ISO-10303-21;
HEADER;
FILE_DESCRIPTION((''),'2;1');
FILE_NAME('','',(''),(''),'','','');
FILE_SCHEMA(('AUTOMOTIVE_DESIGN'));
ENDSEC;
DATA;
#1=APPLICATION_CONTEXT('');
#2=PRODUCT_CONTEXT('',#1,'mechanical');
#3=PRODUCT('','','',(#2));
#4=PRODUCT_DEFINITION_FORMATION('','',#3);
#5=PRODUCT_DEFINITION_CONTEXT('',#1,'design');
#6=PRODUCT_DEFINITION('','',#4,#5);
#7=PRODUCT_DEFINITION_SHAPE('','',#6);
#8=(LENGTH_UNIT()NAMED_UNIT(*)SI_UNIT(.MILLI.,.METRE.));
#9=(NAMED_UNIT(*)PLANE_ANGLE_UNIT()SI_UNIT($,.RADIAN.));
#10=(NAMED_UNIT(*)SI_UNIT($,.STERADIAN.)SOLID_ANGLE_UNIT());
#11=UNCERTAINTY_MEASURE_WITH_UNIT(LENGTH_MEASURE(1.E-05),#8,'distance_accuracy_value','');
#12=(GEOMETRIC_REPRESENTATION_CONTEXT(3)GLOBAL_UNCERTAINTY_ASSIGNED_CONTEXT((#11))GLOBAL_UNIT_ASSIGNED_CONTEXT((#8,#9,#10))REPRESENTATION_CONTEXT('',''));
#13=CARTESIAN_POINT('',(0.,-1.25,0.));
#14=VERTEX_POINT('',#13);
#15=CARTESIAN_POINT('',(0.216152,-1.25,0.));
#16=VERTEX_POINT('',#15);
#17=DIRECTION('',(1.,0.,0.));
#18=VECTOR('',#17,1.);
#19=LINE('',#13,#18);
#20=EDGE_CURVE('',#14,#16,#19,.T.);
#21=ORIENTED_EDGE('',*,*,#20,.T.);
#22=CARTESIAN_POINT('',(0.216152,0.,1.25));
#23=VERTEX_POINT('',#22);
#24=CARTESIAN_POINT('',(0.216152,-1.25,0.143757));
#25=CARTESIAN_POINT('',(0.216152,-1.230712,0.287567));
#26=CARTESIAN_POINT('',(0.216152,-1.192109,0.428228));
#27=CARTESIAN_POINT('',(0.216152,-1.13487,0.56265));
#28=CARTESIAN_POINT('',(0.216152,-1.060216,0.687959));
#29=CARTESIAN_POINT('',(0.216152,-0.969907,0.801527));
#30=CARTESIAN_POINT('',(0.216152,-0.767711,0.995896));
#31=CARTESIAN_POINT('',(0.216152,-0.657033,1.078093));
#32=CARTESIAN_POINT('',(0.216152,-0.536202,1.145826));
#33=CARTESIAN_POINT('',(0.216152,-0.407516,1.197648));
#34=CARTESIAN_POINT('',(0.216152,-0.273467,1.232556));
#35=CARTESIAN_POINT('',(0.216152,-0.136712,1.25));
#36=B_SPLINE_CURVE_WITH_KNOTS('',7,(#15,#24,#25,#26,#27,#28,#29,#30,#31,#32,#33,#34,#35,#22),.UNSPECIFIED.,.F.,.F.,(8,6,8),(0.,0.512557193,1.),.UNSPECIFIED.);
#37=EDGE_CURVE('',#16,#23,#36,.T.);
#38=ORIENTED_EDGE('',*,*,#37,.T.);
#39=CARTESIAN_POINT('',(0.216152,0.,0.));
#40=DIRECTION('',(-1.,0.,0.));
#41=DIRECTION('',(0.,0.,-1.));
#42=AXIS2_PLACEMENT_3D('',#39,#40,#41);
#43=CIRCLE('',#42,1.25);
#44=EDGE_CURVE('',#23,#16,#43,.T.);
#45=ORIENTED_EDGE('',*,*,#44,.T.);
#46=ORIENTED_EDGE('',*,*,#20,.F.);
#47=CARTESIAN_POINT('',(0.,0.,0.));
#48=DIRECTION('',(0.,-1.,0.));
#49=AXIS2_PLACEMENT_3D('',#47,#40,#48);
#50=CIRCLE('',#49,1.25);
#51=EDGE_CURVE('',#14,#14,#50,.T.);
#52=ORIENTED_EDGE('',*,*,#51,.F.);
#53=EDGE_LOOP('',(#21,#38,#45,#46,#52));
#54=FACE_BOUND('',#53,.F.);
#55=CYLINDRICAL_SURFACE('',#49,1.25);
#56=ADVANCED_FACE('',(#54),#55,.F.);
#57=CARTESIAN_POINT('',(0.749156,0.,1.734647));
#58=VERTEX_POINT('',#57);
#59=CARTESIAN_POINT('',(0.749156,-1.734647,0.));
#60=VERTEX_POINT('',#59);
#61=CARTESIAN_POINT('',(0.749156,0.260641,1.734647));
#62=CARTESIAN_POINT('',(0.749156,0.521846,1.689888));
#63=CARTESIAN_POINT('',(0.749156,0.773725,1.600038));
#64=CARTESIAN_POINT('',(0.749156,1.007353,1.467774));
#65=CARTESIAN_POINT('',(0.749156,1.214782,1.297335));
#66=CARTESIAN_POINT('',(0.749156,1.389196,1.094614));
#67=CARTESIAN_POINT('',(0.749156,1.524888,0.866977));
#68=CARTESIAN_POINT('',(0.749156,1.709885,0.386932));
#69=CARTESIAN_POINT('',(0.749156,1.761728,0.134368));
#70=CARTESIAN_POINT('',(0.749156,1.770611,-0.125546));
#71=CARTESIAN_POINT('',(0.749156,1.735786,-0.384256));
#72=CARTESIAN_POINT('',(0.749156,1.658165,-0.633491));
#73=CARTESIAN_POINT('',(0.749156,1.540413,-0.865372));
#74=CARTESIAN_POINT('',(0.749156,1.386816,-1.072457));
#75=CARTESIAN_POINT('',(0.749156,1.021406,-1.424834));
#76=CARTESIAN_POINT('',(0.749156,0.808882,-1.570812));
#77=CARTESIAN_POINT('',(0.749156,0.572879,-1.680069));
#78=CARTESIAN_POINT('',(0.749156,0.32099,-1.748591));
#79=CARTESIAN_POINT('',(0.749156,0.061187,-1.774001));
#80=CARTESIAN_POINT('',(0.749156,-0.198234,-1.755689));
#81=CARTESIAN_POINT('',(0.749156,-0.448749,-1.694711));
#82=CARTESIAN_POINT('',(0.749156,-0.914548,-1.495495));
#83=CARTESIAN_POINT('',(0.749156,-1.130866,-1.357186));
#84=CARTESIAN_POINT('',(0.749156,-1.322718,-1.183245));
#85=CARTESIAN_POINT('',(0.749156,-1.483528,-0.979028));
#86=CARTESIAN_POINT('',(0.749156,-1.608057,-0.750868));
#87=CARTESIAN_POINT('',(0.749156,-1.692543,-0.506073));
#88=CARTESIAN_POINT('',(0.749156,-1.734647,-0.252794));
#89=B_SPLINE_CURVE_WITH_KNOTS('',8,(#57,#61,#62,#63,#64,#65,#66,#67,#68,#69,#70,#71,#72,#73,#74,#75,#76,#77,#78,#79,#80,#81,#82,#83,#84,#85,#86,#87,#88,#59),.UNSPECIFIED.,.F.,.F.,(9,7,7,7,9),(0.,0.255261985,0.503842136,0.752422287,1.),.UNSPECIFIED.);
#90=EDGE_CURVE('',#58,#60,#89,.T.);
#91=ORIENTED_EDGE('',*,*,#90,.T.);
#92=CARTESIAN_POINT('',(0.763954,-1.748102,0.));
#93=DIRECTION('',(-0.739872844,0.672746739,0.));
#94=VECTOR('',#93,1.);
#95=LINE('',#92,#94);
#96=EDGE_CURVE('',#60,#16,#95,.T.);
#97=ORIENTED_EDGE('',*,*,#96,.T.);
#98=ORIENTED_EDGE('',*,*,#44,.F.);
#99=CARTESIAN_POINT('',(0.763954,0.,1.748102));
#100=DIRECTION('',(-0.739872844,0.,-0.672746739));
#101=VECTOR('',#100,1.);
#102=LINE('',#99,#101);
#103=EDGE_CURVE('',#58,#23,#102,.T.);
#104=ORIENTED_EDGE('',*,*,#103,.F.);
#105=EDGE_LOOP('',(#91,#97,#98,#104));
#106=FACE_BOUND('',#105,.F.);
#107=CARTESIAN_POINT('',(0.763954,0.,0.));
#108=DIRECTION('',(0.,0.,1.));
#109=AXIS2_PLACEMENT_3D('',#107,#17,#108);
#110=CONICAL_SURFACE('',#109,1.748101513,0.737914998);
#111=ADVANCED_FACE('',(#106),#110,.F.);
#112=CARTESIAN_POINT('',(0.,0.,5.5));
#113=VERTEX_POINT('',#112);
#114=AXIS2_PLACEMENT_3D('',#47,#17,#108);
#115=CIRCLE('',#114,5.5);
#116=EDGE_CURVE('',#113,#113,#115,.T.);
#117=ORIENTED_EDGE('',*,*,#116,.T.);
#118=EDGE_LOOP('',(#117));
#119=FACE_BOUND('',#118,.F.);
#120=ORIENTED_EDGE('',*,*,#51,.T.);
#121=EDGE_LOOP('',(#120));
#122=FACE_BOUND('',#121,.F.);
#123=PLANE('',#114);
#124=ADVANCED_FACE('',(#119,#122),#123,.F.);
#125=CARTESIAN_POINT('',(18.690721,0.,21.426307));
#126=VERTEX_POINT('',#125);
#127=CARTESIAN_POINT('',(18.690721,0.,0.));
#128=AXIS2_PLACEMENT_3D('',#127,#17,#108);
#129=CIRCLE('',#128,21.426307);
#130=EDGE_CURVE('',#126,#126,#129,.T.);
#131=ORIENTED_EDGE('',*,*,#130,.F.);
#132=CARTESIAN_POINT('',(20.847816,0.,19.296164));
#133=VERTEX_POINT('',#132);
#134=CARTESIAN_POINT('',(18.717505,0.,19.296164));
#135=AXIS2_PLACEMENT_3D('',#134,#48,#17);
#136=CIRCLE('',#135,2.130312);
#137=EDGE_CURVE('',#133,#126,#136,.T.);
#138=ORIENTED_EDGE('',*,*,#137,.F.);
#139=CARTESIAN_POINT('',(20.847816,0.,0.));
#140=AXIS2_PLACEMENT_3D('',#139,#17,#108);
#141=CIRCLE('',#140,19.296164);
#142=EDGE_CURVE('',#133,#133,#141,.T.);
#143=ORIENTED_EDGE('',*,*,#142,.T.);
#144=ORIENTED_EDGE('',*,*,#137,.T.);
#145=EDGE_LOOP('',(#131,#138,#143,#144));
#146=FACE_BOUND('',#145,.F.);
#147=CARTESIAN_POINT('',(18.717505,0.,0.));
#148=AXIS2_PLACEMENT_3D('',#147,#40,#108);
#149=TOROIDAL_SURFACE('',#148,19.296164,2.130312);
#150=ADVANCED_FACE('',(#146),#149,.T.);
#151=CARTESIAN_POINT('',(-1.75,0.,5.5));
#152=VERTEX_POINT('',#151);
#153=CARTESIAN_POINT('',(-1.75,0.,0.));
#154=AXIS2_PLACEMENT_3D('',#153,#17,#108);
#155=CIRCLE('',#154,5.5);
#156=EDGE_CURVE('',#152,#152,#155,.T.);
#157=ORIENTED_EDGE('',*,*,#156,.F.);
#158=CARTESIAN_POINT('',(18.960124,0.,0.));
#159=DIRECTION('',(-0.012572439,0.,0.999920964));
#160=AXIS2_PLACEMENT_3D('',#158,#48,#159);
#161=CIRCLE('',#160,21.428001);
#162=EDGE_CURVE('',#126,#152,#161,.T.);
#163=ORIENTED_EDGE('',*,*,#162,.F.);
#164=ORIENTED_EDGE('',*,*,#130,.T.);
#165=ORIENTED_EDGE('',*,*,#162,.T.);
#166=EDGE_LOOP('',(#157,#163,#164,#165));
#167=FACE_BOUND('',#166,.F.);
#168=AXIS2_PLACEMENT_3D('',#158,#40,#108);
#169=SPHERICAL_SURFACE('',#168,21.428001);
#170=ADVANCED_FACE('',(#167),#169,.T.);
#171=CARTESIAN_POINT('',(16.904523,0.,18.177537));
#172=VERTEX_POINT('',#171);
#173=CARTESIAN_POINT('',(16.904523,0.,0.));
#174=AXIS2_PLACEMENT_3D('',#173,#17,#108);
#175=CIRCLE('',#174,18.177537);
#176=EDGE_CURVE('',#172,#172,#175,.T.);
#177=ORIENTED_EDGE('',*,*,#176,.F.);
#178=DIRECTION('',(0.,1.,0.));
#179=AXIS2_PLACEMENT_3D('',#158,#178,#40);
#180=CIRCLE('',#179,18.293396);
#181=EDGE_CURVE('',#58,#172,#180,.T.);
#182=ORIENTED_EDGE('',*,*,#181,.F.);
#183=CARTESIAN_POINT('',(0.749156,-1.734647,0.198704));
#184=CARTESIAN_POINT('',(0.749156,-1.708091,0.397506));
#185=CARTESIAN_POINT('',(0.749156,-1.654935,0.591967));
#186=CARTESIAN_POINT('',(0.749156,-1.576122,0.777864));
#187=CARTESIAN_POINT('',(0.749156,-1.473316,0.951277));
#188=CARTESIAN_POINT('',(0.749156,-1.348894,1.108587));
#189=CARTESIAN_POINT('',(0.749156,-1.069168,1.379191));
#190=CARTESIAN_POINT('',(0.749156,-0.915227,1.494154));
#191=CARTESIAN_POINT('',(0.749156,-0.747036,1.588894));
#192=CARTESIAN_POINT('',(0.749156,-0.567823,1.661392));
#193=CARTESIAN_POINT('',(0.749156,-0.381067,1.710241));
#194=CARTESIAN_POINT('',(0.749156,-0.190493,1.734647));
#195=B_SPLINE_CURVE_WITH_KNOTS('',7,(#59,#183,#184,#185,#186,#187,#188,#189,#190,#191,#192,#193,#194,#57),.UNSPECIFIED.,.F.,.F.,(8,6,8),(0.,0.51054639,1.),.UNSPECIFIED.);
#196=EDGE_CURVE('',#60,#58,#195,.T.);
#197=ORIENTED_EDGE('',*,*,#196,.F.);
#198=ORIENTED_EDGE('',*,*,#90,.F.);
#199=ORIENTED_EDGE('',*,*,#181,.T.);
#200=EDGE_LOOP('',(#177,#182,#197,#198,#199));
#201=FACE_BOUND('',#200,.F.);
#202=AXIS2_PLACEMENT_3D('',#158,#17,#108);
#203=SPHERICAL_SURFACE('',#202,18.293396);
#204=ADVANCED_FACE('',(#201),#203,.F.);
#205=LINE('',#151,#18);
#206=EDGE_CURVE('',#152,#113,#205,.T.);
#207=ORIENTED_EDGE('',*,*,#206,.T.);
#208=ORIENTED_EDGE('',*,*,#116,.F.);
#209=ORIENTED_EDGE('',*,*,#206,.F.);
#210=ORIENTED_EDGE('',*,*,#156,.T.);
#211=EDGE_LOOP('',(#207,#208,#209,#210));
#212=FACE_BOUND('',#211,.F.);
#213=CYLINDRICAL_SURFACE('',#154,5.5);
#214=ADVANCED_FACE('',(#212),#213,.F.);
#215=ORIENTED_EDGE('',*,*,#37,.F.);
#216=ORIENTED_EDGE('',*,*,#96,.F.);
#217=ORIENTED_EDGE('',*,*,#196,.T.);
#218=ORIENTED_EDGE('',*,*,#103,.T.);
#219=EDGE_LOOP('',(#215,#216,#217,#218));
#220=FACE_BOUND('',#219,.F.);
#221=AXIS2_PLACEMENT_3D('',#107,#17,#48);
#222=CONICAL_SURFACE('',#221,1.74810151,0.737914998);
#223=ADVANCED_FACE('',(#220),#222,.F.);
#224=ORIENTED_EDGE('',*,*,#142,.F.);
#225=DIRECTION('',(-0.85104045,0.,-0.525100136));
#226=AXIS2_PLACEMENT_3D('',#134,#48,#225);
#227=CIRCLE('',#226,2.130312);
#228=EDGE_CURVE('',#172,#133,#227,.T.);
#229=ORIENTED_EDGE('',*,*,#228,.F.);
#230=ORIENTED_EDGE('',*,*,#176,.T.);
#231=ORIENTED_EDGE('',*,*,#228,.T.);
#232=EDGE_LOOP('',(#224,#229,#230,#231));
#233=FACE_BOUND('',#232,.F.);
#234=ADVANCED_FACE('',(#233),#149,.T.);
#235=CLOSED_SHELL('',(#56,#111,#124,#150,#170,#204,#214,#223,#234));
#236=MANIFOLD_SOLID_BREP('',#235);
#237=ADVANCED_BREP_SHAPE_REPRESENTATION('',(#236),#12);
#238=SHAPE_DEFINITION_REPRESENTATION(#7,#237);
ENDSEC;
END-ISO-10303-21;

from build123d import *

# Parameters (mm, degrees)
F2_R        = 1.25
F3_DEPTH    = 20.848816548
F4_T2_ANGLE = 269.9999999999
F4_T4_ANGLE = 90.0000002223


# Not quite as in the source:
# - a fillet or chamfer that OpenCascade refuses, or shapes differently, is made with other operations: its cross-section is extruded or revolved along the edge and cut away or added


with BuildPart() as f1:
    # F0 (on Front) → F1 (revolve)
    with BuildSketch(Plane.XZ):
        with BuildLine():
            ThreePointArc((20.847816448, 19.2961636657), (20.2143632876, 20.8119613812), (18.6907213238, 21.4263072013))
            ThreePointArc((18.6907213238, 21.4263072013), (16.8507396209, 20.3225249849), (16.9045229372, 18.1775365926))
            ThreePointArc((16.9045229372, 18.1775365926), (19.2988876007, 17.2467192141), (20.847816448, 19.2961636657))
        make_face()
        with BuildLine():
            Line((-1.75, 5.5), (0, 5.5))
            Line((0, 5.5), (0, 0))
            Line((0, 0), (0.6667277431, 0))
            ThreePointArc((0.6667277431, 0), (5.3173187467, 12.1869687509), (16.9045229372, 18.1775365926))
            ThreePointArc((16.9045229372, 18.1775365926), (16.8507396209, 20.3225249849), (18.6907213238, 21.4263072013))
            ThreePointArc((18.6907213238, 21.4263072013), (5.7901979365, 16.9030256739), (-1.75, 5.5))
        make_face()
    revolve(axis=Axis((0.3358235447, 0, 0), (1, 0, 0)))

    # F2 (on face) → F3 (cut, through all)
    with BuildSketch(Plane(origin=(0, 0, 0), x_dir=(0, -1, 0), z_dir=(-1, 0, 0))):
        Circle(F2_R)
    extrude(amount=-F3_DEPTH, mode=Mode.SUBTRACT)

    # F4: chamfer of 0.5 on 2 edges, made by hand

    # F4_s1 → F4_t2 (revolve, cut)
    with BuildSketch(Plane.XZ):
        with BuildLine():
            Line((0.7639536686, 1.7481015134), (0.2013545471, 1.2365450652))
            Line((0.2013545471, 1.2365450652), (0.2013545471, 1.2265450652))
            ThreePointArc((0.2013545471, 1.2265450652), (0.4554194631, 1.24), (0.7094843791, 1.24))
            Line((0.7094843791, 1.24), (0.7194610064, 1.2493166933))
            ThreePointArc((0.7194610064, 1.2493166933), (0.7382742313, 1.4989228259), (0.7739086095, 1.7471532769))
            Line((0.7739086095, 1.7471532769), (0.7639536686, 1.7481015134))
        make_face()
    revolve(axis=Axis((0.7094843791, 0, 0), (-1, 0, 0)), revolution_arc=F4_T2_ANGLE, mode=Mode.SUBTRACT)

    # F4_s3 → F4_t4 (revolve, cut)
    with BuildSketch(Plane.XY.offset(2.5e-09)):
        with BuildLine():
            Line((0.7639536686, -1.7481015124), (0.2013545471, -1.2365450642))
            Line((0.2013545471, -1.2365450642), (0.2013545471, -1.2265450642))
            ThreePointArc((0.2013545471, -1.2265450642), (0.4554194631, -1.239999999), (0.7094843791, -1.24))
            Line((0.7094843791, -1.24), (0.7194610064, -1.2493166933))
            ThreePointArc((0.7194610064, -1.2493166933), (0.7382742313, -1.4989228254), (0.7739086095, -1.7471532759))
            Line((0.7739086095, -1.7471532759), (0.7639536686, -1.7481015124))
        make_face()
    revolve(axis=Axis((0.7094843791, -2.4e-09, 2.5e-09), (-1, 0, 0)), revolution_arc=F4_T4_ANGLE, mode=Mode.SUBTRACT)


solid = f1.part
